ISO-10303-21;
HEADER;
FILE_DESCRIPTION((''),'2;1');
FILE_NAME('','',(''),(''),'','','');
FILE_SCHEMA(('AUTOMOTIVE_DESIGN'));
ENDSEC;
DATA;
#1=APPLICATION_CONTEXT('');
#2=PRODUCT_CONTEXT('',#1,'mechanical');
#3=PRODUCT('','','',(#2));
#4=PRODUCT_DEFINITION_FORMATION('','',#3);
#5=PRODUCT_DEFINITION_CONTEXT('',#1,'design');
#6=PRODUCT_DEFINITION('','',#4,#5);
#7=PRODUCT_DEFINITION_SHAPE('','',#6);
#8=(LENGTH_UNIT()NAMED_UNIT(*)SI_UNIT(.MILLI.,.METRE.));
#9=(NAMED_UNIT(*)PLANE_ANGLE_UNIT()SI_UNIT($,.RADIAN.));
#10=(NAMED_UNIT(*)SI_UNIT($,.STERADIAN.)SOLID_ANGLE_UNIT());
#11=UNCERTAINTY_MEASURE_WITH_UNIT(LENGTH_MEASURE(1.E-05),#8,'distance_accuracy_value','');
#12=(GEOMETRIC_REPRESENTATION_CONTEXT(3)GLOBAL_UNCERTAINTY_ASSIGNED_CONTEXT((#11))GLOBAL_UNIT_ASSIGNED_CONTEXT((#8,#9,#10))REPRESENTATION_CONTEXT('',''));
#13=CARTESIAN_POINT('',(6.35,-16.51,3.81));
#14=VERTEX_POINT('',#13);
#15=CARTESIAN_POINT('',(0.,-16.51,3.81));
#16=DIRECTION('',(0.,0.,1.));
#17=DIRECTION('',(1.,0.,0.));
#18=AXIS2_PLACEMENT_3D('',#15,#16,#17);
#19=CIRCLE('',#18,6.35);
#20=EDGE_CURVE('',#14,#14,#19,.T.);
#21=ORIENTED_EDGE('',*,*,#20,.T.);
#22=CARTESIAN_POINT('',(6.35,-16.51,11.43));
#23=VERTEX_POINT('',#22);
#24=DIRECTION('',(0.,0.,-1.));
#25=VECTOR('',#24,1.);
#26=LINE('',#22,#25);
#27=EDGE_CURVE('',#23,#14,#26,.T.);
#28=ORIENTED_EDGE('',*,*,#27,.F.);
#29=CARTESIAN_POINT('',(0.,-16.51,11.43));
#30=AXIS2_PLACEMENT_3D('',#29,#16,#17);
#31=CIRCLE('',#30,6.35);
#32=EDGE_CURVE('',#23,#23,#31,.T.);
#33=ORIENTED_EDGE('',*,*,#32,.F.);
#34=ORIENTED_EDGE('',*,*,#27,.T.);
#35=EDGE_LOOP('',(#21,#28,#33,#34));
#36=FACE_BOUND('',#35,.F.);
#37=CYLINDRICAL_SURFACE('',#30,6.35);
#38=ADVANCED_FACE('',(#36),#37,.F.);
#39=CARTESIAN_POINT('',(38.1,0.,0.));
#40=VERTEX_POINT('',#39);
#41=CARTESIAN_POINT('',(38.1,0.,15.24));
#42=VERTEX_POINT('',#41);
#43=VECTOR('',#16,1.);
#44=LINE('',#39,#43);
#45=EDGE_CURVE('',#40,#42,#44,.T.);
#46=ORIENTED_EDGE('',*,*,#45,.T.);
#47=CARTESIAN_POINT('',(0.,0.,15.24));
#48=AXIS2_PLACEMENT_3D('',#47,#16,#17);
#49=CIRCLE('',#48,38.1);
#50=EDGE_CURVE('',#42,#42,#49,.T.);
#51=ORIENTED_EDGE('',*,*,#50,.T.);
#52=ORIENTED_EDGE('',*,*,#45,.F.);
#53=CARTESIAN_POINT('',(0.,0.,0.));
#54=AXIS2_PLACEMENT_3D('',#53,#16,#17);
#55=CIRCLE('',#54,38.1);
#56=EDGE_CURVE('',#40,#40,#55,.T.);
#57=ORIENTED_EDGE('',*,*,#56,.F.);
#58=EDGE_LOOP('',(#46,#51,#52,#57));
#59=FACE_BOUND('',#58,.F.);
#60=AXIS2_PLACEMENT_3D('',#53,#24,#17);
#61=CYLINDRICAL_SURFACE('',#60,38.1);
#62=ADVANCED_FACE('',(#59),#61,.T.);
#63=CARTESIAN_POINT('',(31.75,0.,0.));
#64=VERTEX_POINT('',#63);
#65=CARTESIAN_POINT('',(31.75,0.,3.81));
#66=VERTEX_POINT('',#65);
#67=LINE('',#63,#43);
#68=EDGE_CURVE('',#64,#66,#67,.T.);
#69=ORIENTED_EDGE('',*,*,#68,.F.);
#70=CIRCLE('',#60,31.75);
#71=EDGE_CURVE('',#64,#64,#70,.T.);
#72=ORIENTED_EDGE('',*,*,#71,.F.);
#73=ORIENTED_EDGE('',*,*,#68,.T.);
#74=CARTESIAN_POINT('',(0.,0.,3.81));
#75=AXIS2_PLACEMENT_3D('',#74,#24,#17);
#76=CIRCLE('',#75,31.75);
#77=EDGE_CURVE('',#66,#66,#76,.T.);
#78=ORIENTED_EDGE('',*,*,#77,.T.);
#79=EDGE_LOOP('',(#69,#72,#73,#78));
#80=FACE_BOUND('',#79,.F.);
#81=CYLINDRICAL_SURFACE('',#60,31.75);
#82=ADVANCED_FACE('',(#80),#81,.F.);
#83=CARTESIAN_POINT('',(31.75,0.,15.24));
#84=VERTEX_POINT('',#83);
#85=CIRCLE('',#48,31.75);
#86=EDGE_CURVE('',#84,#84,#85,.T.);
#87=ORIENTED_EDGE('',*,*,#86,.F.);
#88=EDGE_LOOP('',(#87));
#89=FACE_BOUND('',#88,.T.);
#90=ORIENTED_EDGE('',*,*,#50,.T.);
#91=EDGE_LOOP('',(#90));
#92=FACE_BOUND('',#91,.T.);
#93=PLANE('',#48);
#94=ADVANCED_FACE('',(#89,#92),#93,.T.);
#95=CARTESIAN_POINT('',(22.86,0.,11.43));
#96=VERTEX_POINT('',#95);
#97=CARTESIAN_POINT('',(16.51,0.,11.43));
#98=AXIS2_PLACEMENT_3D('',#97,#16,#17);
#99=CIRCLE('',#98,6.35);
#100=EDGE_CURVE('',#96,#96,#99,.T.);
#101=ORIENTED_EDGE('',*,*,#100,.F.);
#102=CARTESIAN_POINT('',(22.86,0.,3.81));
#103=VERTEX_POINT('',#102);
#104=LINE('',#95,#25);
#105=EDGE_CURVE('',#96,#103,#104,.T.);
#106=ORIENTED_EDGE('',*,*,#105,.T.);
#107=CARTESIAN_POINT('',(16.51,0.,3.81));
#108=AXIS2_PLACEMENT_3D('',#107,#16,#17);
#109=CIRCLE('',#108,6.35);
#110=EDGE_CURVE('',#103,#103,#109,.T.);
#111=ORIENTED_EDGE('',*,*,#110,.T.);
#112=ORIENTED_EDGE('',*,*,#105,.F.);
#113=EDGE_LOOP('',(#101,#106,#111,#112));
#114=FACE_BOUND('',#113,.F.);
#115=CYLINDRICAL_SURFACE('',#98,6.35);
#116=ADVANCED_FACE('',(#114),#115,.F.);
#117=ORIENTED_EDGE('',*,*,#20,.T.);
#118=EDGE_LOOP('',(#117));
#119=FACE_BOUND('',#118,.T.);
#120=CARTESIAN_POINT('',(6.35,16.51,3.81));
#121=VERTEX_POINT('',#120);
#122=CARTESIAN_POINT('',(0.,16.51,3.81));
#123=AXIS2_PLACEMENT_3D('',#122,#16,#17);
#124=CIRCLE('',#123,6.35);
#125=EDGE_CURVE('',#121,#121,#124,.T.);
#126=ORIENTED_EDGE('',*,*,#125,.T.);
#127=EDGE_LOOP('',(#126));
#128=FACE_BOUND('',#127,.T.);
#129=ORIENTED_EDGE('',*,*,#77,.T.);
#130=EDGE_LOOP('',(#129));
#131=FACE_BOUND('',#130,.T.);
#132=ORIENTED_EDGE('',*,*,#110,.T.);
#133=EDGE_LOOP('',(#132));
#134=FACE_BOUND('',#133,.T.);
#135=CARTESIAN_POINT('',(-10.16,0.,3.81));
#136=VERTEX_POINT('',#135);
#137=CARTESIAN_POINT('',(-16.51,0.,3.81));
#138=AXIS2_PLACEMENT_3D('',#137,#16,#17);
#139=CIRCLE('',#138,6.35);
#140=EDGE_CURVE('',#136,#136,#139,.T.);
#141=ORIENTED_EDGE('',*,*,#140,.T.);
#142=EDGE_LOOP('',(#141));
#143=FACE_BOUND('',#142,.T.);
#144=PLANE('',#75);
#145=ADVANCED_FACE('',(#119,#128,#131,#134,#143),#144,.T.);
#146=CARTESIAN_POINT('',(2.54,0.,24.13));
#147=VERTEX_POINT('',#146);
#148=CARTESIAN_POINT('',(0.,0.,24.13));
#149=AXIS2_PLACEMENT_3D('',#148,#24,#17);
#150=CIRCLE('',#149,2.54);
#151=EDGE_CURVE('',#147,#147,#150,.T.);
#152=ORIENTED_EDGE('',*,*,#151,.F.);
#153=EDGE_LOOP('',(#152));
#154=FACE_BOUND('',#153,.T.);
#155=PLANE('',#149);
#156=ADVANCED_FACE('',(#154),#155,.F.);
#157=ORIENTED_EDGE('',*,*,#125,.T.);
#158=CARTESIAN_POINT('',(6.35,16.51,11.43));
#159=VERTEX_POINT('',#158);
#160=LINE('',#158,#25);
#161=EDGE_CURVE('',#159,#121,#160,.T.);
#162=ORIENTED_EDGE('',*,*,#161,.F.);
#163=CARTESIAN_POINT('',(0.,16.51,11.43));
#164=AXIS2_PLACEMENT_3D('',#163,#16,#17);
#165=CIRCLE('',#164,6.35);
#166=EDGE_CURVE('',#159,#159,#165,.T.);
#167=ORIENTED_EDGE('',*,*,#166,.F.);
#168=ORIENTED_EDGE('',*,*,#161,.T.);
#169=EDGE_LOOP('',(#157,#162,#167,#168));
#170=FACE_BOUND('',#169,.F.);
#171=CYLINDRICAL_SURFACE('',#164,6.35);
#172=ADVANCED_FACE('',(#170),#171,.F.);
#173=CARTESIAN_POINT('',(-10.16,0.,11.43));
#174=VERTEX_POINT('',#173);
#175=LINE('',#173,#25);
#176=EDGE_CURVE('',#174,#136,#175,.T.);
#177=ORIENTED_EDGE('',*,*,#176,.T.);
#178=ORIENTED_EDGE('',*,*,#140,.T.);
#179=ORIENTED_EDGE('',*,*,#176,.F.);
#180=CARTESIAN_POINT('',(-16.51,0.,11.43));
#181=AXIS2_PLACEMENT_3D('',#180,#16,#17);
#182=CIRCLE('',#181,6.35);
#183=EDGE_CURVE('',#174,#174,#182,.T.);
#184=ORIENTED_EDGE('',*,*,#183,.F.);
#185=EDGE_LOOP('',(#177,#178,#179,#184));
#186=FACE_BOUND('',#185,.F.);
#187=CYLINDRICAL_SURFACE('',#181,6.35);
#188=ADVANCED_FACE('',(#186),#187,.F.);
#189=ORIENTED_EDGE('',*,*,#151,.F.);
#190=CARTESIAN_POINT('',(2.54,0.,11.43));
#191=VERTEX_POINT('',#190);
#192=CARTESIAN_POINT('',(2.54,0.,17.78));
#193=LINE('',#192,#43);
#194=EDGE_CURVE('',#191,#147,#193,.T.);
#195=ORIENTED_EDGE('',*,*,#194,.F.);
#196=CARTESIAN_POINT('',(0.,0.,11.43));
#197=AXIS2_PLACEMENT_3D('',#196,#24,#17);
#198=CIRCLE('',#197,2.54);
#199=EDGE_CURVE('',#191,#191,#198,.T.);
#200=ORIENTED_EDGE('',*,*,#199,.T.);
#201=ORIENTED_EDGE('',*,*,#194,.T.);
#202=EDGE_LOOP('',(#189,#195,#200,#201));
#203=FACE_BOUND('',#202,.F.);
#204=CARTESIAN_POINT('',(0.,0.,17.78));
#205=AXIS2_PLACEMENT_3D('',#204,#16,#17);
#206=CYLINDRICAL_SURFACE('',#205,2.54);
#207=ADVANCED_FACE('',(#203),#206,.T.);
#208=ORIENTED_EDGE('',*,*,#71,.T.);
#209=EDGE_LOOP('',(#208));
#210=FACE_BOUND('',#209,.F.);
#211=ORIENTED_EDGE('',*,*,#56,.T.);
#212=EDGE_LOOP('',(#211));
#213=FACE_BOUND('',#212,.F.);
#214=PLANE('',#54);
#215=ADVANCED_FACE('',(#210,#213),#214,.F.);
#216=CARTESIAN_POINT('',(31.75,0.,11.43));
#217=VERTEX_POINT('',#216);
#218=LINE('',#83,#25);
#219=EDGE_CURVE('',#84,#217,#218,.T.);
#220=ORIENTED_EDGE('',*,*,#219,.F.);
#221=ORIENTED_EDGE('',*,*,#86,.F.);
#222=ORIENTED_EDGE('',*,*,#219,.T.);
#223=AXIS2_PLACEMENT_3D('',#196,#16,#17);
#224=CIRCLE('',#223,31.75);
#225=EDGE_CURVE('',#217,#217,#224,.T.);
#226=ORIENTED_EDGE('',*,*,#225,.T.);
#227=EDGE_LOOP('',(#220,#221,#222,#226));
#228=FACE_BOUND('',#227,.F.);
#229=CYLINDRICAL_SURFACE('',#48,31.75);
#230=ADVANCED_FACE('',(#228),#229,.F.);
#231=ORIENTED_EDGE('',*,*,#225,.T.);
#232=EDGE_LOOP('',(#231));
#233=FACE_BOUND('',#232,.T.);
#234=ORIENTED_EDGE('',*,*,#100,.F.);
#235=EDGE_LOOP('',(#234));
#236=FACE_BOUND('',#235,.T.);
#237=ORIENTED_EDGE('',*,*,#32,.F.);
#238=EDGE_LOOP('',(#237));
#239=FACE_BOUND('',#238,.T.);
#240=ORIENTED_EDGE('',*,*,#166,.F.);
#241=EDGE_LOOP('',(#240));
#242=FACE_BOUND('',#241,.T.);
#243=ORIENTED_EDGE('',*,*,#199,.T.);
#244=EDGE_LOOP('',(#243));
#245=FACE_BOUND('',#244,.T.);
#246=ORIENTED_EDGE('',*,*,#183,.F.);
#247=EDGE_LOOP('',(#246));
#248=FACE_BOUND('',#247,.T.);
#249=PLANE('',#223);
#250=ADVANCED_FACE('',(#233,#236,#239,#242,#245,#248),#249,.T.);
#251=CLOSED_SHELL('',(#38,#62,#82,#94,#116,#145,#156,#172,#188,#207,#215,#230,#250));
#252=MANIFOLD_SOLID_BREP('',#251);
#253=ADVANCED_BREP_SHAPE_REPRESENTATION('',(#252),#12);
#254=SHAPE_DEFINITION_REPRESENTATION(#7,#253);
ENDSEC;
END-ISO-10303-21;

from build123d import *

# Parameters (mm, degrees)
F0_R     = 38.1
F1_DEPTH = 15.24
F2_R     = 31.75
F3_DEPTH = 3.81
F4_R     = 31.75
F5_DEPTH = 3.81
F6_R     = 6.35
F7_DEPTH = 11.431
F8_W     = 2.54
F8_H     = 12.7


# Not quite as in the source:
# - a feature names something its author has since deleted; it is built from what else it names


with BuildPart() as f1:
    # F0 (on Top) → F1 (new body)
    with BuildSketch(Plane.XY):
        Circle(F0_R)
    extrude(amount=F1_DEPTH)

    # F2 (on face) → F3 (cut)
    with BuildSketch(Plane.XY.offset(15.24)):
        Circle(F2_R)
    extrude(amount=-F3_DEPTH, mode=Mode.SUBTRACT)

    # F4 (on face) → F5 (cut)
    with BuildSketch(Plane(origin=(0, 0, 0), x_dir=(1, 0, 0), z_dir=(0, 0, -1))):
        Circle(F4_R)
    extrude(amount=-F5_DEPTH, mode=Mode.SUBTRACT)

    # F6 (on face) → F7 (cut, through all)
    with BuildSketch(Plane.XY.offset(11.43)):
        with Locations((0, 16.51)):
            Circle(F6_R)
        with Locations((16.51, 0)):
            Circle(F6_R)
        with Locations((0, -16.51)):
            Circle(F6_R)
        with Locations((-16.51, 0)):
            Circle(F6_R)
    extrude(amount=-F7_DEPTH, mode=Mode.SUBTRACT)

    # F8 (on Front) → F10 (revolve)
    with BuildSketch(Plane.XZ):
        with Locations((1.27, 17.78)):
            Rectangle(F8_W, F8_H)
    revolve(axis=Axis((0, 0, 19.05), (0, 0, -1)))


solid = f1.part
